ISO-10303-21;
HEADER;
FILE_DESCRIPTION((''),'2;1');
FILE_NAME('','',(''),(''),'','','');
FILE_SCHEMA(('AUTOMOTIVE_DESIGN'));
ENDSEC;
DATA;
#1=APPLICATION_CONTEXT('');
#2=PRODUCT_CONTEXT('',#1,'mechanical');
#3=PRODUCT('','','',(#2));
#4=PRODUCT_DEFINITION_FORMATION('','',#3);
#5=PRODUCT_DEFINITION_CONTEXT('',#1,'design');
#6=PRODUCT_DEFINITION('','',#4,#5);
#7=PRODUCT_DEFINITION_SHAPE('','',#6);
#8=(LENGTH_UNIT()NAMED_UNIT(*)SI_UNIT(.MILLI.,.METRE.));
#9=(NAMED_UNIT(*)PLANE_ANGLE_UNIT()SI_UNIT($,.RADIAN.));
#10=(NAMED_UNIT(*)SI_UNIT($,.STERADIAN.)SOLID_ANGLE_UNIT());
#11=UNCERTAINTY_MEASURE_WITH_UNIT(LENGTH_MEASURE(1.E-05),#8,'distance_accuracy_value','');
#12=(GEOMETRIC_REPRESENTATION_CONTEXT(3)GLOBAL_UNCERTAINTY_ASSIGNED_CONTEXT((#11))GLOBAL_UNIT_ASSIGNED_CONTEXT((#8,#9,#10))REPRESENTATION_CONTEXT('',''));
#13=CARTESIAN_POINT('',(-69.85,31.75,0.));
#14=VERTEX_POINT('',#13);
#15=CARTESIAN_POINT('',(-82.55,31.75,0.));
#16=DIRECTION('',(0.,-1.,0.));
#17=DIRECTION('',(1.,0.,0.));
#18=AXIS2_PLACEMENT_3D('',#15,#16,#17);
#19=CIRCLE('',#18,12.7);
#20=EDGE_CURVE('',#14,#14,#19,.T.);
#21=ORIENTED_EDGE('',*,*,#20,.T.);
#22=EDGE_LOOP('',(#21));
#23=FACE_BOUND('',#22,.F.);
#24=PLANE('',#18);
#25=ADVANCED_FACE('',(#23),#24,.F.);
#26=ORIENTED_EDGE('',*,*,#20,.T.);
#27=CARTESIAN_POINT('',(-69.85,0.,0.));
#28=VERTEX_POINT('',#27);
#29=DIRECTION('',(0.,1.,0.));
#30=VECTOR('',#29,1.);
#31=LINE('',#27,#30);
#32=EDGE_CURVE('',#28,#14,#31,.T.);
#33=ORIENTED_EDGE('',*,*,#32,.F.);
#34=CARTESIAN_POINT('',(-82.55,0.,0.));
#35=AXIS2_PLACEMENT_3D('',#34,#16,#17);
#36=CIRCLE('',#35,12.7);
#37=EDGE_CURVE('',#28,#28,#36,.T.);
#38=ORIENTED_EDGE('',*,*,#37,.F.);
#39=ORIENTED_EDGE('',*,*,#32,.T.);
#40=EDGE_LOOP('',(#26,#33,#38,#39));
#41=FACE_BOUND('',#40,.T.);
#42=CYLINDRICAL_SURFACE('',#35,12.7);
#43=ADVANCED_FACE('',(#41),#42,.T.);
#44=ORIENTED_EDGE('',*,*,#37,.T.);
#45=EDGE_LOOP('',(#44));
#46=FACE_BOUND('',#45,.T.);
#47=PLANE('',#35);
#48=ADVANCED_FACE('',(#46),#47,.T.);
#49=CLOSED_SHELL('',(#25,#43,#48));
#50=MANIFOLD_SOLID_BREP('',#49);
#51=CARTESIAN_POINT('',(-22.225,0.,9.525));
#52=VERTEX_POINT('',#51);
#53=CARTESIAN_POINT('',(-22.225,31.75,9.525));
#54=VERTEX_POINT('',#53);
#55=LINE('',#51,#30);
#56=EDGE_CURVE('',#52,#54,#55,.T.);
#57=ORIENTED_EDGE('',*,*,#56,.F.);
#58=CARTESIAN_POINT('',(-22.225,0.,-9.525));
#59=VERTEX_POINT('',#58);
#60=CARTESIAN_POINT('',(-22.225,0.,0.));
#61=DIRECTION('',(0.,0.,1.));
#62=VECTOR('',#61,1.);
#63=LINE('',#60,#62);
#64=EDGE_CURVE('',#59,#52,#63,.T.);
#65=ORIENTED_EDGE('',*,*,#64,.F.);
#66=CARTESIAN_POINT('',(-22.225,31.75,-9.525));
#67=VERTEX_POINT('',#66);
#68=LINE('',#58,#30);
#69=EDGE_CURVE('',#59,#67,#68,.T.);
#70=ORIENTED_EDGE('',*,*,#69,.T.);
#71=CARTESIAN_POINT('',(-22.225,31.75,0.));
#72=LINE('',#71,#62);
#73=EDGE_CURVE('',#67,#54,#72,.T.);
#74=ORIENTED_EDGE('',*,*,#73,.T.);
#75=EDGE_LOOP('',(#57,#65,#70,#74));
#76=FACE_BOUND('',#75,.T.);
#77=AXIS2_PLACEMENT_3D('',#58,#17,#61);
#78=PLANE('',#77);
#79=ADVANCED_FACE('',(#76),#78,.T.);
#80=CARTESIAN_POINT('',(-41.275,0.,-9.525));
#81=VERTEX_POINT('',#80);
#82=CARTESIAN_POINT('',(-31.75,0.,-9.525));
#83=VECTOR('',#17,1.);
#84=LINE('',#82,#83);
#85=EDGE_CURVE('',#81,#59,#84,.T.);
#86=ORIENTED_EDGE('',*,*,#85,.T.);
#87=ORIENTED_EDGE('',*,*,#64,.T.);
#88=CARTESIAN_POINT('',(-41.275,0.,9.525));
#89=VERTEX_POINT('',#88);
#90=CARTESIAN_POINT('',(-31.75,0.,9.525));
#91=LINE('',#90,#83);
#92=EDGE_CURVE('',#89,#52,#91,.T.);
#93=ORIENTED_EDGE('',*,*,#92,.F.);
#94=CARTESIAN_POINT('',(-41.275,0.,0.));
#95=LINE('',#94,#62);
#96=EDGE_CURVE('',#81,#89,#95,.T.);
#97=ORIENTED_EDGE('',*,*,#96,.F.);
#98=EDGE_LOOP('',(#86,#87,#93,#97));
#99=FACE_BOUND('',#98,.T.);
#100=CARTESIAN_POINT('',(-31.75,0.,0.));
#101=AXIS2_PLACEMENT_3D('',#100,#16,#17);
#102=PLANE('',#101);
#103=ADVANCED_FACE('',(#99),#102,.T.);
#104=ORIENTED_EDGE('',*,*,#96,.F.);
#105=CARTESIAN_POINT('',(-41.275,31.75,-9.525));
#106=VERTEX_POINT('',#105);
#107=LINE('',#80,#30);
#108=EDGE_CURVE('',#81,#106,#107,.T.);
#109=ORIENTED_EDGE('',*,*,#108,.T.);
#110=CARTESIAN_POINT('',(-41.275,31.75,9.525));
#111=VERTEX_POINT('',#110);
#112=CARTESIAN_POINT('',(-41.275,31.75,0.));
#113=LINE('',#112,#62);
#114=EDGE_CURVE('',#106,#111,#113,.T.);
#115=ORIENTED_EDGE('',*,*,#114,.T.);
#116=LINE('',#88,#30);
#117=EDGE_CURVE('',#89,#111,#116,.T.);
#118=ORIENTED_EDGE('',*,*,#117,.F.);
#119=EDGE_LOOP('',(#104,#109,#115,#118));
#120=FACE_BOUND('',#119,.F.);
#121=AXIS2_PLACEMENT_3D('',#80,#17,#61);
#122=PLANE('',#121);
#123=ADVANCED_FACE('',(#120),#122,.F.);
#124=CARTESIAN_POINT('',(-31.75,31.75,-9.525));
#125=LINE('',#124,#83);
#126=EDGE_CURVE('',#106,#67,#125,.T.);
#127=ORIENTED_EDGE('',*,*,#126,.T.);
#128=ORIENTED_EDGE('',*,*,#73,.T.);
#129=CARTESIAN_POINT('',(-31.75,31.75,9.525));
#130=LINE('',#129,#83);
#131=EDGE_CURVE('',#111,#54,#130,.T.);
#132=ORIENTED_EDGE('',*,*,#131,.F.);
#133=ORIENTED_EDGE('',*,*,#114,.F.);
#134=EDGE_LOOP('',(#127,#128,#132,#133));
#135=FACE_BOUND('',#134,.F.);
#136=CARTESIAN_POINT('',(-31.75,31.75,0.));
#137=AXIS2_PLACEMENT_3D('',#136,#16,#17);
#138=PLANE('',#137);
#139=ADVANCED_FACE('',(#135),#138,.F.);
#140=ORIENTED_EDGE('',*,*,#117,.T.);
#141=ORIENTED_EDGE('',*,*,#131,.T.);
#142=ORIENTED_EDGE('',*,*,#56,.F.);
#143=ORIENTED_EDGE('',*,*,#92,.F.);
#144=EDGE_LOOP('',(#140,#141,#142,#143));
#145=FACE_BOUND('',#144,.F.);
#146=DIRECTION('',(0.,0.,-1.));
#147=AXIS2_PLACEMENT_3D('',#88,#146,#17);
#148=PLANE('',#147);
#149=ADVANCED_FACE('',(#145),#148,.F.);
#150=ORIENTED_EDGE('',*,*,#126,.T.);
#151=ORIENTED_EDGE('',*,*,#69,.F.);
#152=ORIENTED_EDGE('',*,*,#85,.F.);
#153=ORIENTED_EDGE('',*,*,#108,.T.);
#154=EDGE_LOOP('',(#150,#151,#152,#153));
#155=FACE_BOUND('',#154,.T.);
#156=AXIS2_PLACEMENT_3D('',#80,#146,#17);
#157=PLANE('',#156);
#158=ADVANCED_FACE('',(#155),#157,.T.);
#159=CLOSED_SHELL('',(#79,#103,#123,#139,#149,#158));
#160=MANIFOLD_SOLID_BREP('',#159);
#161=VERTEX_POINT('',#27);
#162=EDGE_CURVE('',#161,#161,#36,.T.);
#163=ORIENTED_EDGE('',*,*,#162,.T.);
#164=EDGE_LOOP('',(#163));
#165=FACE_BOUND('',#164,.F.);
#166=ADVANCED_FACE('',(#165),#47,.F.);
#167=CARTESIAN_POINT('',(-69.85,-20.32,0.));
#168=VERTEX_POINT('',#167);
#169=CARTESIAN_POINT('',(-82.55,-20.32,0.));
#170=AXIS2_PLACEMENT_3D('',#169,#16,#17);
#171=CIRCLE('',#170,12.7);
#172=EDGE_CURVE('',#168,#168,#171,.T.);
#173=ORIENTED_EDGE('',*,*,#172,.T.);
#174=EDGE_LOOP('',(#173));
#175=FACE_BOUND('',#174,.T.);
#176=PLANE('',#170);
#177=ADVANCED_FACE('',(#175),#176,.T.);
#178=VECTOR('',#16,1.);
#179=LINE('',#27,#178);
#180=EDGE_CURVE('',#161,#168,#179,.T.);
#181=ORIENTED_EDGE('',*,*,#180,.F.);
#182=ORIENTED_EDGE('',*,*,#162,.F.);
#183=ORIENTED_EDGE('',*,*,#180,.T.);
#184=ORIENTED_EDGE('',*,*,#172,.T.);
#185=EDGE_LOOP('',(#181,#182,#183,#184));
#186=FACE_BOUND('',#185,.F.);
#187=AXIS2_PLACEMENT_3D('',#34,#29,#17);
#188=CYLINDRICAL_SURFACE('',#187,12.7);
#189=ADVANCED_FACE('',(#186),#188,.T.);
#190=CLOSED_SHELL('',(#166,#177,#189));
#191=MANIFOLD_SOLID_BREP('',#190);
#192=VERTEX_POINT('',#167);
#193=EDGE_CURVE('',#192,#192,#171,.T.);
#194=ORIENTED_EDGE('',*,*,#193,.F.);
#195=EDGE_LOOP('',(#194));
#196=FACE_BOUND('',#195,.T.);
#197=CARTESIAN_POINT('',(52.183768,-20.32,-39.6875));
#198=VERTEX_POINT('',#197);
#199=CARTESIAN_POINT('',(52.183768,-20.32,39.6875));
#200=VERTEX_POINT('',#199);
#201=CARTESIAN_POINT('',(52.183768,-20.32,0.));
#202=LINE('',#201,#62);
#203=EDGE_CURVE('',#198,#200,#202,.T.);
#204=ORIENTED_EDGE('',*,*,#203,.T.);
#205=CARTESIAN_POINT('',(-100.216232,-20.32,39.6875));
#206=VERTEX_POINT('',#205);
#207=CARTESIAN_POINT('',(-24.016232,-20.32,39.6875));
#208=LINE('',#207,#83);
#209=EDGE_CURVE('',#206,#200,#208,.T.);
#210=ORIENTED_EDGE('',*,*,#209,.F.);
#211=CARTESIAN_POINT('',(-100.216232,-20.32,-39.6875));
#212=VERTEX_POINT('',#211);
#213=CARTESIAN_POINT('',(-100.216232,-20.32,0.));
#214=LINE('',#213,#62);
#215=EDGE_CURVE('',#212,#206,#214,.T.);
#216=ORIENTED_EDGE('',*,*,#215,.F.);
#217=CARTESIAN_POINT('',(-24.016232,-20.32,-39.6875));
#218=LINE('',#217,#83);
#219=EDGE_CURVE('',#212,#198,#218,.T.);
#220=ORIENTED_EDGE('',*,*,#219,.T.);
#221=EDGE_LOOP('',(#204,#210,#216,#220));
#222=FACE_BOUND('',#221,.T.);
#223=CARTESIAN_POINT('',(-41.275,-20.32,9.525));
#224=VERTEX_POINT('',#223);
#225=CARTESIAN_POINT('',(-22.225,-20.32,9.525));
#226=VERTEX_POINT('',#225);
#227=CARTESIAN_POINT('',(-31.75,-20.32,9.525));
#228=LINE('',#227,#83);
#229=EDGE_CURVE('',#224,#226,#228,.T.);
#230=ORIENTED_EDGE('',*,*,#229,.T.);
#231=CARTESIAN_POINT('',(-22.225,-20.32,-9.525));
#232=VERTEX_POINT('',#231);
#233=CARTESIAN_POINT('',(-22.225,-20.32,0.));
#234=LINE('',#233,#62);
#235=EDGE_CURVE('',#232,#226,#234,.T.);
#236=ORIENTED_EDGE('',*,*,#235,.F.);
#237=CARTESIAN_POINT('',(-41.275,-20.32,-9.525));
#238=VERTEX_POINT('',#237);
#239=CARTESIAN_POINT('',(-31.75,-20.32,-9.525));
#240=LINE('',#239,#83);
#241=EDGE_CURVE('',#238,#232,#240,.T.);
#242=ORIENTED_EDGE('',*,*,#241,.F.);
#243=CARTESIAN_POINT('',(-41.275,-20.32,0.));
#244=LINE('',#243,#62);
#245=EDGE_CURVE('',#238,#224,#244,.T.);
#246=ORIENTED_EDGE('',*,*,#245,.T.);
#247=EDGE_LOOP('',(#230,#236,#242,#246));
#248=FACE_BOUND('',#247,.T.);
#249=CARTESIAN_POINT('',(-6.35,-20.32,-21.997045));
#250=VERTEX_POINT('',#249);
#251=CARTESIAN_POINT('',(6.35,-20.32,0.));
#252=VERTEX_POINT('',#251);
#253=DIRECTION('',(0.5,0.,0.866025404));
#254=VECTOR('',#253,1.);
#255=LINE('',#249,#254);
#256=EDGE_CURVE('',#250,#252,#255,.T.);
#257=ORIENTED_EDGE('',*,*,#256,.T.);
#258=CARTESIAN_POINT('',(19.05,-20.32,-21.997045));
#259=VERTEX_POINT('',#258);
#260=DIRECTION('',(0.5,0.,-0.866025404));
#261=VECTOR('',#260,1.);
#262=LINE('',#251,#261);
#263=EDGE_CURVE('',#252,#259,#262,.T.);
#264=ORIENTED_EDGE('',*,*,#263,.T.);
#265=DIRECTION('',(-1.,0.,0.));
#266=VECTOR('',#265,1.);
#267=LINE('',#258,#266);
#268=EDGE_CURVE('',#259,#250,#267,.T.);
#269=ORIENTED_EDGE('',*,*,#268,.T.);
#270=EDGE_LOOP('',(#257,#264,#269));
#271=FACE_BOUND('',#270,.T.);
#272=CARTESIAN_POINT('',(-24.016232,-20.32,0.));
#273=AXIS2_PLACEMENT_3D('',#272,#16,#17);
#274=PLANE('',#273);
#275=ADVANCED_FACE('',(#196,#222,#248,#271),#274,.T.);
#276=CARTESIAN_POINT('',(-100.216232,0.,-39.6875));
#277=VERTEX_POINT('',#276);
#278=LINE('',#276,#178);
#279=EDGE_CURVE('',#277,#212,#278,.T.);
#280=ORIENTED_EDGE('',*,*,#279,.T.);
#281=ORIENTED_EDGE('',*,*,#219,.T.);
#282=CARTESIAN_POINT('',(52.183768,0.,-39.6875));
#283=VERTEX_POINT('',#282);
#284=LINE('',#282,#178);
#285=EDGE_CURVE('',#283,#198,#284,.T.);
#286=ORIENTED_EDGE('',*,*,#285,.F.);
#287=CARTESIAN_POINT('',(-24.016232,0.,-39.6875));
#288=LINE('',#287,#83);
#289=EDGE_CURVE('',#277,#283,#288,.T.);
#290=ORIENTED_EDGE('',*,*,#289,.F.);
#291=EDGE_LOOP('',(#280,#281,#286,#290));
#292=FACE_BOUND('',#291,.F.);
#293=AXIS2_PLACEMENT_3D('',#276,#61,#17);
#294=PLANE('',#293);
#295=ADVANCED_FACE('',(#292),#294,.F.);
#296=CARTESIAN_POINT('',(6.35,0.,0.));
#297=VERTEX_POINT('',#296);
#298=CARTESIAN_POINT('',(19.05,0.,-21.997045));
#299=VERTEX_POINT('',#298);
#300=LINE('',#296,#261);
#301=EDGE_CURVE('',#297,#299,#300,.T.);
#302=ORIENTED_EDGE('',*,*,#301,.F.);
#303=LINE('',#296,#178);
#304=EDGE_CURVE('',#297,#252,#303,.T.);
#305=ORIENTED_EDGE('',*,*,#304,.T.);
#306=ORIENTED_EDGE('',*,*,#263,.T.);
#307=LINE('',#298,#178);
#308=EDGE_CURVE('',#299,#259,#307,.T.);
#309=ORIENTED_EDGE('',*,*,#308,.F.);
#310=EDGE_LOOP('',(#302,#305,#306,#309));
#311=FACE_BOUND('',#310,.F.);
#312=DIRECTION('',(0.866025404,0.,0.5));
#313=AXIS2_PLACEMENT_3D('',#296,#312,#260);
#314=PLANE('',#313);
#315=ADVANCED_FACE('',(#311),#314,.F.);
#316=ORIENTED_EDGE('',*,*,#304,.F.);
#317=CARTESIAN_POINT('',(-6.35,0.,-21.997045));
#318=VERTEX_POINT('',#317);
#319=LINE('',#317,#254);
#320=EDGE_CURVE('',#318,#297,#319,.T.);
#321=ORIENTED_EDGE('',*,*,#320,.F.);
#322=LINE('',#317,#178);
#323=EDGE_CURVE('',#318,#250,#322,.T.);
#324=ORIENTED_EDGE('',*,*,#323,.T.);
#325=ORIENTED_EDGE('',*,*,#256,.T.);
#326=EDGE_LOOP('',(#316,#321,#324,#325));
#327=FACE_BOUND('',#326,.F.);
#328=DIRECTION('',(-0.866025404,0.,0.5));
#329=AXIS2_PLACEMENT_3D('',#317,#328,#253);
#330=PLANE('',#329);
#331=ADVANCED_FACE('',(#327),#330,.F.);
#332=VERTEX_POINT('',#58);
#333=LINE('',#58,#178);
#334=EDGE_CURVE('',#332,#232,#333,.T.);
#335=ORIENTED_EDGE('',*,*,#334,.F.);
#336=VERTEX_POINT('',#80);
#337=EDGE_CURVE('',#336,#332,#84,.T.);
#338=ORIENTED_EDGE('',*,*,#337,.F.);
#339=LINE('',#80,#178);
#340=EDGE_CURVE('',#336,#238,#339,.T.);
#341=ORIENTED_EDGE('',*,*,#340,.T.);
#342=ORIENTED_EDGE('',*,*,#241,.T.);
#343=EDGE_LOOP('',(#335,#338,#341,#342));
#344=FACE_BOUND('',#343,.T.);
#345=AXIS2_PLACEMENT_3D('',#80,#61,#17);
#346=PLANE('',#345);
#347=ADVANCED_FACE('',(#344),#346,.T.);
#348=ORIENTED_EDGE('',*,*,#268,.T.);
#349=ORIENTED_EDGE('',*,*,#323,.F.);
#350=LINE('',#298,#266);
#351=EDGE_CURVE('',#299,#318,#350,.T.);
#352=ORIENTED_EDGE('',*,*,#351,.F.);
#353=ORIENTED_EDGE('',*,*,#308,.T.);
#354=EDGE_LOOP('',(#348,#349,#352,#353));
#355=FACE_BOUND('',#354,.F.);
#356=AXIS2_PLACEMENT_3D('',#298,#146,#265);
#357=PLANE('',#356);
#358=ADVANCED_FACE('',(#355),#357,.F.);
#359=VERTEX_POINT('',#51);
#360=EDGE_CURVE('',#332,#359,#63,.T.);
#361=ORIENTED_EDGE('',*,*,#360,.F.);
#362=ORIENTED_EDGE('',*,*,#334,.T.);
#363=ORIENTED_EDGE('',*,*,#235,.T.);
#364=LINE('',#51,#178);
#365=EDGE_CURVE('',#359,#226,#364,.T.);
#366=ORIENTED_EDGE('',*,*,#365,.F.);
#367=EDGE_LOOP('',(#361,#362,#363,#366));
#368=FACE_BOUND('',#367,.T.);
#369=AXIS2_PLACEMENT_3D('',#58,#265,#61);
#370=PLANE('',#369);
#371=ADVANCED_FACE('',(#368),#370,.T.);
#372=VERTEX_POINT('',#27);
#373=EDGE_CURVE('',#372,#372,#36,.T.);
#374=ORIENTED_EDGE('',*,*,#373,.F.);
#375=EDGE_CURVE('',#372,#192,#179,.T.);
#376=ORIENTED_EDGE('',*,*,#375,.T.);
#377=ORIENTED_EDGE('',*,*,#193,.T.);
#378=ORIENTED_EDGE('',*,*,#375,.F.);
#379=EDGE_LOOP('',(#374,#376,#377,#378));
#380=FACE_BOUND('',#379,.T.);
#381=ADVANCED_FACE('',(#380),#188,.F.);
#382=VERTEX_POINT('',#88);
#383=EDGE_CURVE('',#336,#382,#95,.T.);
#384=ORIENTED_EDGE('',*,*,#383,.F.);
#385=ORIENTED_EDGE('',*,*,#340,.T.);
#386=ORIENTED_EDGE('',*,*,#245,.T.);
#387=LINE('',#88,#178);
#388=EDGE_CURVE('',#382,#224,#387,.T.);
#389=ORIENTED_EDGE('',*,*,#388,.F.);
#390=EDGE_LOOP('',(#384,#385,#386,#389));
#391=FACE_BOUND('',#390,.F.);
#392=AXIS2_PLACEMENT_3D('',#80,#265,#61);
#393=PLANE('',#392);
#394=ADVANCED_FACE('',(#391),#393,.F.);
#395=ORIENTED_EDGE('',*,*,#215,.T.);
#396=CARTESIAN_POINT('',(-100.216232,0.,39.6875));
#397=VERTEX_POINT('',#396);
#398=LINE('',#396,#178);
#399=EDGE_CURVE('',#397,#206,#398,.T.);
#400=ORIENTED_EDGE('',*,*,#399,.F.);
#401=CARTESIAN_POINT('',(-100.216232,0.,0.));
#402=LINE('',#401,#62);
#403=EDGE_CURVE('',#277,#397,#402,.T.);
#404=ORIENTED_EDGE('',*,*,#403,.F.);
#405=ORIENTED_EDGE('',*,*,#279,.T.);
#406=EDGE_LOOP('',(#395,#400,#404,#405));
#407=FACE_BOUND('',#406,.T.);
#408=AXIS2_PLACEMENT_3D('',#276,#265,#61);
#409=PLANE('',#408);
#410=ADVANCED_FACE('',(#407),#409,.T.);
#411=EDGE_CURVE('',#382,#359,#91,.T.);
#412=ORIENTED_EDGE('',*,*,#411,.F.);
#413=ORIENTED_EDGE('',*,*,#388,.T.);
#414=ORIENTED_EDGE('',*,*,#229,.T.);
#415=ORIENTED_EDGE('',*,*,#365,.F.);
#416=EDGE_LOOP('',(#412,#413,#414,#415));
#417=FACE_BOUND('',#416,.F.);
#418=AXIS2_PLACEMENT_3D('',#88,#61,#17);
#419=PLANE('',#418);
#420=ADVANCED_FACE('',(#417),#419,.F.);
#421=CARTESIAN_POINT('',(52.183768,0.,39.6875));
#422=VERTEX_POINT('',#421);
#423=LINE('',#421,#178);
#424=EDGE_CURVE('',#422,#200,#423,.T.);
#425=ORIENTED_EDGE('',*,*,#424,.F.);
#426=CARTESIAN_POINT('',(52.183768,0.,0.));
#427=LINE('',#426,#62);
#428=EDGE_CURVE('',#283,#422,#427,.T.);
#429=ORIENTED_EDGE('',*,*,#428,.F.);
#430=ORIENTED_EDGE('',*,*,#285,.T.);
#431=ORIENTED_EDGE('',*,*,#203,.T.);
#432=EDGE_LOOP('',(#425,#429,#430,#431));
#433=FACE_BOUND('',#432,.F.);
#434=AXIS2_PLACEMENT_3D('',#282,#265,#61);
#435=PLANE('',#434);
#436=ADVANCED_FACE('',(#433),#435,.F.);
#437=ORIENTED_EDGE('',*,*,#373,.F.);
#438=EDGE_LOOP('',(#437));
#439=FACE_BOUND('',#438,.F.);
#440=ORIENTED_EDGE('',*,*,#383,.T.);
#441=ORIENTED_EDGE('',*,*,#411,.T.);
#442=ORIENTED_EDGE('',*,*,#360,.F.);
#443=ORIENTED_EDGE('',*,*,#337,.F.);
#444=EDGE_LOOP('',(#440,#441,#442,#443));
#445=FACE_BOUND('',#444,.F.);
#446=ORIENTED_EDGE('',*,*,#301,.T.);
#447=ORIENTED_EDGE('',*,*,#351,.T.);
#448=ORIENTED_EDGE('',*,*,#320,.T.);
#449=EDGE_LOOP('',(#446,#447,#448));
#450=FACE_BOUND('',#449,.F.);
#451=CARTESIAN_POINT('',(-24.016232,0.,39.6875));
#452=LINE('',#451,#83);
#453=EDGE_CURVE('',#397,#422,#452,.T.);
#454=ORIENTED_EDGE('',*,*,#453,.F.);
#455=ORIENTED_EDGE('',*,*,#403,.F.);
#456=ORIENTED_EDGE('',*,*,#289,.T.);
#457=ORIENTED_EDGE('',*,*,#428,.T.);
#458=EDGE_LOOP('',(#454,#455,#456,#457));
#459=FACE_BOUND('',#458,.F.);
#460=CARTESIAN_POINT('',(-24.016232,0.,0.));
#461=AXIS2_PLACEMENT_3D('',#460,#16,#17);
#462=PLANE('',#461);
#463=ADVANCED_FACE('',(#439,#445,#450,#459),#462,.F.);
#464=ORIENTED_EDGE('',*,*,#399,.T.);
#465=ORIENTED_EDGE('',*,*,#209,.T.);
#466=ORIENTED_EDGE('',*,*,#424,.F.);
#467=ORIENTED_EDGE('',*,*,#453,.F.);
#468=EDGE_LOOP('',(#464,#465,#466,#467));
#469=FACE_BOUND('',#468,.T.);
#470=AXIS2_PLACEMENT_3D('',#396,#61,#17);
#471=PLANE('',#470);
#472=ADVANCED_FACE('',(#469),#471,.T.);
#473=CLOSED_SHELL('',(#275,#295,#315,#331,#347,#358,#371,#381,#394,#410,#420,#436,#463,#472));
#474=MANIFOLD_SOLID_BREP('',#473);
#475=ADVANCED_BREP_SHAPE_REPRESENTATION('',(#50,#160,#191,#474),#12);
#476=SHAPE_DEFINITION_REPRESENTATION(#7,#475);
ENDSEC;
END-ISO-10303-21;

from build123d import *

# Parameters (mm, degrees)
F0_W     = 152.4
F0_H     = 79.375
F0_R     = 12.7
F0_W_2   = 19.05
F0_H_2   = 19.05
F1_DEPTH = 20.32
F2_DEPTH = 31.75
F3_DEPTH = 31.75
F4_DEPTH = 20.32


with BuildPart() as f1:
    # F0 (on Front) → F1 (new body)
    with BuildSketch(Plane.XZ):
        with Locations((-24.0162322402, 0)):
            Rectangle(F0_W, F0_H)
        Polygon((-6.35, -21.9970452561), (6.35, 0), (19.05, -21.9970452561), align=None, mode=Mode.SUBTRACT)
        with Locations((-82.55, 0)):
            Circle(F0_R, mode=Mode.SUBTRACT)
        with Locations((-31.75, 0)):
            Rectangle(F0_W_2, F0_H_2, mode=Mode.SUBTRACT)
    extrude(amount=F1_DEPTH)

    # F0 (on Front) → F2 (join)
    with BuildSketch(Plane.XZ):
        with Locations((-31.75, 0)):
            Rectangle(F0_W_2, F0_H_2)
    extrude(amount=-F2_DEPTH)

    # F0 (on Front) → F3 (join)
    with BuildSketch(Plane.XZ):
        with Locations((-82.55, 0)):
            Circle(F0_R)
    extrude(amount=-F3_DEPTH)


with BuildPart() as f4:
    # F4 (new): a face of the model
    f4_faces = [f1.part.faces().sort_by_distance(p)[0] for p in [
        (-82.55, 0, 0),
    ]]
    extrude(f4_faces, amount=F4_DEPTH)


solid = Compound([f1.part, f4.part])
